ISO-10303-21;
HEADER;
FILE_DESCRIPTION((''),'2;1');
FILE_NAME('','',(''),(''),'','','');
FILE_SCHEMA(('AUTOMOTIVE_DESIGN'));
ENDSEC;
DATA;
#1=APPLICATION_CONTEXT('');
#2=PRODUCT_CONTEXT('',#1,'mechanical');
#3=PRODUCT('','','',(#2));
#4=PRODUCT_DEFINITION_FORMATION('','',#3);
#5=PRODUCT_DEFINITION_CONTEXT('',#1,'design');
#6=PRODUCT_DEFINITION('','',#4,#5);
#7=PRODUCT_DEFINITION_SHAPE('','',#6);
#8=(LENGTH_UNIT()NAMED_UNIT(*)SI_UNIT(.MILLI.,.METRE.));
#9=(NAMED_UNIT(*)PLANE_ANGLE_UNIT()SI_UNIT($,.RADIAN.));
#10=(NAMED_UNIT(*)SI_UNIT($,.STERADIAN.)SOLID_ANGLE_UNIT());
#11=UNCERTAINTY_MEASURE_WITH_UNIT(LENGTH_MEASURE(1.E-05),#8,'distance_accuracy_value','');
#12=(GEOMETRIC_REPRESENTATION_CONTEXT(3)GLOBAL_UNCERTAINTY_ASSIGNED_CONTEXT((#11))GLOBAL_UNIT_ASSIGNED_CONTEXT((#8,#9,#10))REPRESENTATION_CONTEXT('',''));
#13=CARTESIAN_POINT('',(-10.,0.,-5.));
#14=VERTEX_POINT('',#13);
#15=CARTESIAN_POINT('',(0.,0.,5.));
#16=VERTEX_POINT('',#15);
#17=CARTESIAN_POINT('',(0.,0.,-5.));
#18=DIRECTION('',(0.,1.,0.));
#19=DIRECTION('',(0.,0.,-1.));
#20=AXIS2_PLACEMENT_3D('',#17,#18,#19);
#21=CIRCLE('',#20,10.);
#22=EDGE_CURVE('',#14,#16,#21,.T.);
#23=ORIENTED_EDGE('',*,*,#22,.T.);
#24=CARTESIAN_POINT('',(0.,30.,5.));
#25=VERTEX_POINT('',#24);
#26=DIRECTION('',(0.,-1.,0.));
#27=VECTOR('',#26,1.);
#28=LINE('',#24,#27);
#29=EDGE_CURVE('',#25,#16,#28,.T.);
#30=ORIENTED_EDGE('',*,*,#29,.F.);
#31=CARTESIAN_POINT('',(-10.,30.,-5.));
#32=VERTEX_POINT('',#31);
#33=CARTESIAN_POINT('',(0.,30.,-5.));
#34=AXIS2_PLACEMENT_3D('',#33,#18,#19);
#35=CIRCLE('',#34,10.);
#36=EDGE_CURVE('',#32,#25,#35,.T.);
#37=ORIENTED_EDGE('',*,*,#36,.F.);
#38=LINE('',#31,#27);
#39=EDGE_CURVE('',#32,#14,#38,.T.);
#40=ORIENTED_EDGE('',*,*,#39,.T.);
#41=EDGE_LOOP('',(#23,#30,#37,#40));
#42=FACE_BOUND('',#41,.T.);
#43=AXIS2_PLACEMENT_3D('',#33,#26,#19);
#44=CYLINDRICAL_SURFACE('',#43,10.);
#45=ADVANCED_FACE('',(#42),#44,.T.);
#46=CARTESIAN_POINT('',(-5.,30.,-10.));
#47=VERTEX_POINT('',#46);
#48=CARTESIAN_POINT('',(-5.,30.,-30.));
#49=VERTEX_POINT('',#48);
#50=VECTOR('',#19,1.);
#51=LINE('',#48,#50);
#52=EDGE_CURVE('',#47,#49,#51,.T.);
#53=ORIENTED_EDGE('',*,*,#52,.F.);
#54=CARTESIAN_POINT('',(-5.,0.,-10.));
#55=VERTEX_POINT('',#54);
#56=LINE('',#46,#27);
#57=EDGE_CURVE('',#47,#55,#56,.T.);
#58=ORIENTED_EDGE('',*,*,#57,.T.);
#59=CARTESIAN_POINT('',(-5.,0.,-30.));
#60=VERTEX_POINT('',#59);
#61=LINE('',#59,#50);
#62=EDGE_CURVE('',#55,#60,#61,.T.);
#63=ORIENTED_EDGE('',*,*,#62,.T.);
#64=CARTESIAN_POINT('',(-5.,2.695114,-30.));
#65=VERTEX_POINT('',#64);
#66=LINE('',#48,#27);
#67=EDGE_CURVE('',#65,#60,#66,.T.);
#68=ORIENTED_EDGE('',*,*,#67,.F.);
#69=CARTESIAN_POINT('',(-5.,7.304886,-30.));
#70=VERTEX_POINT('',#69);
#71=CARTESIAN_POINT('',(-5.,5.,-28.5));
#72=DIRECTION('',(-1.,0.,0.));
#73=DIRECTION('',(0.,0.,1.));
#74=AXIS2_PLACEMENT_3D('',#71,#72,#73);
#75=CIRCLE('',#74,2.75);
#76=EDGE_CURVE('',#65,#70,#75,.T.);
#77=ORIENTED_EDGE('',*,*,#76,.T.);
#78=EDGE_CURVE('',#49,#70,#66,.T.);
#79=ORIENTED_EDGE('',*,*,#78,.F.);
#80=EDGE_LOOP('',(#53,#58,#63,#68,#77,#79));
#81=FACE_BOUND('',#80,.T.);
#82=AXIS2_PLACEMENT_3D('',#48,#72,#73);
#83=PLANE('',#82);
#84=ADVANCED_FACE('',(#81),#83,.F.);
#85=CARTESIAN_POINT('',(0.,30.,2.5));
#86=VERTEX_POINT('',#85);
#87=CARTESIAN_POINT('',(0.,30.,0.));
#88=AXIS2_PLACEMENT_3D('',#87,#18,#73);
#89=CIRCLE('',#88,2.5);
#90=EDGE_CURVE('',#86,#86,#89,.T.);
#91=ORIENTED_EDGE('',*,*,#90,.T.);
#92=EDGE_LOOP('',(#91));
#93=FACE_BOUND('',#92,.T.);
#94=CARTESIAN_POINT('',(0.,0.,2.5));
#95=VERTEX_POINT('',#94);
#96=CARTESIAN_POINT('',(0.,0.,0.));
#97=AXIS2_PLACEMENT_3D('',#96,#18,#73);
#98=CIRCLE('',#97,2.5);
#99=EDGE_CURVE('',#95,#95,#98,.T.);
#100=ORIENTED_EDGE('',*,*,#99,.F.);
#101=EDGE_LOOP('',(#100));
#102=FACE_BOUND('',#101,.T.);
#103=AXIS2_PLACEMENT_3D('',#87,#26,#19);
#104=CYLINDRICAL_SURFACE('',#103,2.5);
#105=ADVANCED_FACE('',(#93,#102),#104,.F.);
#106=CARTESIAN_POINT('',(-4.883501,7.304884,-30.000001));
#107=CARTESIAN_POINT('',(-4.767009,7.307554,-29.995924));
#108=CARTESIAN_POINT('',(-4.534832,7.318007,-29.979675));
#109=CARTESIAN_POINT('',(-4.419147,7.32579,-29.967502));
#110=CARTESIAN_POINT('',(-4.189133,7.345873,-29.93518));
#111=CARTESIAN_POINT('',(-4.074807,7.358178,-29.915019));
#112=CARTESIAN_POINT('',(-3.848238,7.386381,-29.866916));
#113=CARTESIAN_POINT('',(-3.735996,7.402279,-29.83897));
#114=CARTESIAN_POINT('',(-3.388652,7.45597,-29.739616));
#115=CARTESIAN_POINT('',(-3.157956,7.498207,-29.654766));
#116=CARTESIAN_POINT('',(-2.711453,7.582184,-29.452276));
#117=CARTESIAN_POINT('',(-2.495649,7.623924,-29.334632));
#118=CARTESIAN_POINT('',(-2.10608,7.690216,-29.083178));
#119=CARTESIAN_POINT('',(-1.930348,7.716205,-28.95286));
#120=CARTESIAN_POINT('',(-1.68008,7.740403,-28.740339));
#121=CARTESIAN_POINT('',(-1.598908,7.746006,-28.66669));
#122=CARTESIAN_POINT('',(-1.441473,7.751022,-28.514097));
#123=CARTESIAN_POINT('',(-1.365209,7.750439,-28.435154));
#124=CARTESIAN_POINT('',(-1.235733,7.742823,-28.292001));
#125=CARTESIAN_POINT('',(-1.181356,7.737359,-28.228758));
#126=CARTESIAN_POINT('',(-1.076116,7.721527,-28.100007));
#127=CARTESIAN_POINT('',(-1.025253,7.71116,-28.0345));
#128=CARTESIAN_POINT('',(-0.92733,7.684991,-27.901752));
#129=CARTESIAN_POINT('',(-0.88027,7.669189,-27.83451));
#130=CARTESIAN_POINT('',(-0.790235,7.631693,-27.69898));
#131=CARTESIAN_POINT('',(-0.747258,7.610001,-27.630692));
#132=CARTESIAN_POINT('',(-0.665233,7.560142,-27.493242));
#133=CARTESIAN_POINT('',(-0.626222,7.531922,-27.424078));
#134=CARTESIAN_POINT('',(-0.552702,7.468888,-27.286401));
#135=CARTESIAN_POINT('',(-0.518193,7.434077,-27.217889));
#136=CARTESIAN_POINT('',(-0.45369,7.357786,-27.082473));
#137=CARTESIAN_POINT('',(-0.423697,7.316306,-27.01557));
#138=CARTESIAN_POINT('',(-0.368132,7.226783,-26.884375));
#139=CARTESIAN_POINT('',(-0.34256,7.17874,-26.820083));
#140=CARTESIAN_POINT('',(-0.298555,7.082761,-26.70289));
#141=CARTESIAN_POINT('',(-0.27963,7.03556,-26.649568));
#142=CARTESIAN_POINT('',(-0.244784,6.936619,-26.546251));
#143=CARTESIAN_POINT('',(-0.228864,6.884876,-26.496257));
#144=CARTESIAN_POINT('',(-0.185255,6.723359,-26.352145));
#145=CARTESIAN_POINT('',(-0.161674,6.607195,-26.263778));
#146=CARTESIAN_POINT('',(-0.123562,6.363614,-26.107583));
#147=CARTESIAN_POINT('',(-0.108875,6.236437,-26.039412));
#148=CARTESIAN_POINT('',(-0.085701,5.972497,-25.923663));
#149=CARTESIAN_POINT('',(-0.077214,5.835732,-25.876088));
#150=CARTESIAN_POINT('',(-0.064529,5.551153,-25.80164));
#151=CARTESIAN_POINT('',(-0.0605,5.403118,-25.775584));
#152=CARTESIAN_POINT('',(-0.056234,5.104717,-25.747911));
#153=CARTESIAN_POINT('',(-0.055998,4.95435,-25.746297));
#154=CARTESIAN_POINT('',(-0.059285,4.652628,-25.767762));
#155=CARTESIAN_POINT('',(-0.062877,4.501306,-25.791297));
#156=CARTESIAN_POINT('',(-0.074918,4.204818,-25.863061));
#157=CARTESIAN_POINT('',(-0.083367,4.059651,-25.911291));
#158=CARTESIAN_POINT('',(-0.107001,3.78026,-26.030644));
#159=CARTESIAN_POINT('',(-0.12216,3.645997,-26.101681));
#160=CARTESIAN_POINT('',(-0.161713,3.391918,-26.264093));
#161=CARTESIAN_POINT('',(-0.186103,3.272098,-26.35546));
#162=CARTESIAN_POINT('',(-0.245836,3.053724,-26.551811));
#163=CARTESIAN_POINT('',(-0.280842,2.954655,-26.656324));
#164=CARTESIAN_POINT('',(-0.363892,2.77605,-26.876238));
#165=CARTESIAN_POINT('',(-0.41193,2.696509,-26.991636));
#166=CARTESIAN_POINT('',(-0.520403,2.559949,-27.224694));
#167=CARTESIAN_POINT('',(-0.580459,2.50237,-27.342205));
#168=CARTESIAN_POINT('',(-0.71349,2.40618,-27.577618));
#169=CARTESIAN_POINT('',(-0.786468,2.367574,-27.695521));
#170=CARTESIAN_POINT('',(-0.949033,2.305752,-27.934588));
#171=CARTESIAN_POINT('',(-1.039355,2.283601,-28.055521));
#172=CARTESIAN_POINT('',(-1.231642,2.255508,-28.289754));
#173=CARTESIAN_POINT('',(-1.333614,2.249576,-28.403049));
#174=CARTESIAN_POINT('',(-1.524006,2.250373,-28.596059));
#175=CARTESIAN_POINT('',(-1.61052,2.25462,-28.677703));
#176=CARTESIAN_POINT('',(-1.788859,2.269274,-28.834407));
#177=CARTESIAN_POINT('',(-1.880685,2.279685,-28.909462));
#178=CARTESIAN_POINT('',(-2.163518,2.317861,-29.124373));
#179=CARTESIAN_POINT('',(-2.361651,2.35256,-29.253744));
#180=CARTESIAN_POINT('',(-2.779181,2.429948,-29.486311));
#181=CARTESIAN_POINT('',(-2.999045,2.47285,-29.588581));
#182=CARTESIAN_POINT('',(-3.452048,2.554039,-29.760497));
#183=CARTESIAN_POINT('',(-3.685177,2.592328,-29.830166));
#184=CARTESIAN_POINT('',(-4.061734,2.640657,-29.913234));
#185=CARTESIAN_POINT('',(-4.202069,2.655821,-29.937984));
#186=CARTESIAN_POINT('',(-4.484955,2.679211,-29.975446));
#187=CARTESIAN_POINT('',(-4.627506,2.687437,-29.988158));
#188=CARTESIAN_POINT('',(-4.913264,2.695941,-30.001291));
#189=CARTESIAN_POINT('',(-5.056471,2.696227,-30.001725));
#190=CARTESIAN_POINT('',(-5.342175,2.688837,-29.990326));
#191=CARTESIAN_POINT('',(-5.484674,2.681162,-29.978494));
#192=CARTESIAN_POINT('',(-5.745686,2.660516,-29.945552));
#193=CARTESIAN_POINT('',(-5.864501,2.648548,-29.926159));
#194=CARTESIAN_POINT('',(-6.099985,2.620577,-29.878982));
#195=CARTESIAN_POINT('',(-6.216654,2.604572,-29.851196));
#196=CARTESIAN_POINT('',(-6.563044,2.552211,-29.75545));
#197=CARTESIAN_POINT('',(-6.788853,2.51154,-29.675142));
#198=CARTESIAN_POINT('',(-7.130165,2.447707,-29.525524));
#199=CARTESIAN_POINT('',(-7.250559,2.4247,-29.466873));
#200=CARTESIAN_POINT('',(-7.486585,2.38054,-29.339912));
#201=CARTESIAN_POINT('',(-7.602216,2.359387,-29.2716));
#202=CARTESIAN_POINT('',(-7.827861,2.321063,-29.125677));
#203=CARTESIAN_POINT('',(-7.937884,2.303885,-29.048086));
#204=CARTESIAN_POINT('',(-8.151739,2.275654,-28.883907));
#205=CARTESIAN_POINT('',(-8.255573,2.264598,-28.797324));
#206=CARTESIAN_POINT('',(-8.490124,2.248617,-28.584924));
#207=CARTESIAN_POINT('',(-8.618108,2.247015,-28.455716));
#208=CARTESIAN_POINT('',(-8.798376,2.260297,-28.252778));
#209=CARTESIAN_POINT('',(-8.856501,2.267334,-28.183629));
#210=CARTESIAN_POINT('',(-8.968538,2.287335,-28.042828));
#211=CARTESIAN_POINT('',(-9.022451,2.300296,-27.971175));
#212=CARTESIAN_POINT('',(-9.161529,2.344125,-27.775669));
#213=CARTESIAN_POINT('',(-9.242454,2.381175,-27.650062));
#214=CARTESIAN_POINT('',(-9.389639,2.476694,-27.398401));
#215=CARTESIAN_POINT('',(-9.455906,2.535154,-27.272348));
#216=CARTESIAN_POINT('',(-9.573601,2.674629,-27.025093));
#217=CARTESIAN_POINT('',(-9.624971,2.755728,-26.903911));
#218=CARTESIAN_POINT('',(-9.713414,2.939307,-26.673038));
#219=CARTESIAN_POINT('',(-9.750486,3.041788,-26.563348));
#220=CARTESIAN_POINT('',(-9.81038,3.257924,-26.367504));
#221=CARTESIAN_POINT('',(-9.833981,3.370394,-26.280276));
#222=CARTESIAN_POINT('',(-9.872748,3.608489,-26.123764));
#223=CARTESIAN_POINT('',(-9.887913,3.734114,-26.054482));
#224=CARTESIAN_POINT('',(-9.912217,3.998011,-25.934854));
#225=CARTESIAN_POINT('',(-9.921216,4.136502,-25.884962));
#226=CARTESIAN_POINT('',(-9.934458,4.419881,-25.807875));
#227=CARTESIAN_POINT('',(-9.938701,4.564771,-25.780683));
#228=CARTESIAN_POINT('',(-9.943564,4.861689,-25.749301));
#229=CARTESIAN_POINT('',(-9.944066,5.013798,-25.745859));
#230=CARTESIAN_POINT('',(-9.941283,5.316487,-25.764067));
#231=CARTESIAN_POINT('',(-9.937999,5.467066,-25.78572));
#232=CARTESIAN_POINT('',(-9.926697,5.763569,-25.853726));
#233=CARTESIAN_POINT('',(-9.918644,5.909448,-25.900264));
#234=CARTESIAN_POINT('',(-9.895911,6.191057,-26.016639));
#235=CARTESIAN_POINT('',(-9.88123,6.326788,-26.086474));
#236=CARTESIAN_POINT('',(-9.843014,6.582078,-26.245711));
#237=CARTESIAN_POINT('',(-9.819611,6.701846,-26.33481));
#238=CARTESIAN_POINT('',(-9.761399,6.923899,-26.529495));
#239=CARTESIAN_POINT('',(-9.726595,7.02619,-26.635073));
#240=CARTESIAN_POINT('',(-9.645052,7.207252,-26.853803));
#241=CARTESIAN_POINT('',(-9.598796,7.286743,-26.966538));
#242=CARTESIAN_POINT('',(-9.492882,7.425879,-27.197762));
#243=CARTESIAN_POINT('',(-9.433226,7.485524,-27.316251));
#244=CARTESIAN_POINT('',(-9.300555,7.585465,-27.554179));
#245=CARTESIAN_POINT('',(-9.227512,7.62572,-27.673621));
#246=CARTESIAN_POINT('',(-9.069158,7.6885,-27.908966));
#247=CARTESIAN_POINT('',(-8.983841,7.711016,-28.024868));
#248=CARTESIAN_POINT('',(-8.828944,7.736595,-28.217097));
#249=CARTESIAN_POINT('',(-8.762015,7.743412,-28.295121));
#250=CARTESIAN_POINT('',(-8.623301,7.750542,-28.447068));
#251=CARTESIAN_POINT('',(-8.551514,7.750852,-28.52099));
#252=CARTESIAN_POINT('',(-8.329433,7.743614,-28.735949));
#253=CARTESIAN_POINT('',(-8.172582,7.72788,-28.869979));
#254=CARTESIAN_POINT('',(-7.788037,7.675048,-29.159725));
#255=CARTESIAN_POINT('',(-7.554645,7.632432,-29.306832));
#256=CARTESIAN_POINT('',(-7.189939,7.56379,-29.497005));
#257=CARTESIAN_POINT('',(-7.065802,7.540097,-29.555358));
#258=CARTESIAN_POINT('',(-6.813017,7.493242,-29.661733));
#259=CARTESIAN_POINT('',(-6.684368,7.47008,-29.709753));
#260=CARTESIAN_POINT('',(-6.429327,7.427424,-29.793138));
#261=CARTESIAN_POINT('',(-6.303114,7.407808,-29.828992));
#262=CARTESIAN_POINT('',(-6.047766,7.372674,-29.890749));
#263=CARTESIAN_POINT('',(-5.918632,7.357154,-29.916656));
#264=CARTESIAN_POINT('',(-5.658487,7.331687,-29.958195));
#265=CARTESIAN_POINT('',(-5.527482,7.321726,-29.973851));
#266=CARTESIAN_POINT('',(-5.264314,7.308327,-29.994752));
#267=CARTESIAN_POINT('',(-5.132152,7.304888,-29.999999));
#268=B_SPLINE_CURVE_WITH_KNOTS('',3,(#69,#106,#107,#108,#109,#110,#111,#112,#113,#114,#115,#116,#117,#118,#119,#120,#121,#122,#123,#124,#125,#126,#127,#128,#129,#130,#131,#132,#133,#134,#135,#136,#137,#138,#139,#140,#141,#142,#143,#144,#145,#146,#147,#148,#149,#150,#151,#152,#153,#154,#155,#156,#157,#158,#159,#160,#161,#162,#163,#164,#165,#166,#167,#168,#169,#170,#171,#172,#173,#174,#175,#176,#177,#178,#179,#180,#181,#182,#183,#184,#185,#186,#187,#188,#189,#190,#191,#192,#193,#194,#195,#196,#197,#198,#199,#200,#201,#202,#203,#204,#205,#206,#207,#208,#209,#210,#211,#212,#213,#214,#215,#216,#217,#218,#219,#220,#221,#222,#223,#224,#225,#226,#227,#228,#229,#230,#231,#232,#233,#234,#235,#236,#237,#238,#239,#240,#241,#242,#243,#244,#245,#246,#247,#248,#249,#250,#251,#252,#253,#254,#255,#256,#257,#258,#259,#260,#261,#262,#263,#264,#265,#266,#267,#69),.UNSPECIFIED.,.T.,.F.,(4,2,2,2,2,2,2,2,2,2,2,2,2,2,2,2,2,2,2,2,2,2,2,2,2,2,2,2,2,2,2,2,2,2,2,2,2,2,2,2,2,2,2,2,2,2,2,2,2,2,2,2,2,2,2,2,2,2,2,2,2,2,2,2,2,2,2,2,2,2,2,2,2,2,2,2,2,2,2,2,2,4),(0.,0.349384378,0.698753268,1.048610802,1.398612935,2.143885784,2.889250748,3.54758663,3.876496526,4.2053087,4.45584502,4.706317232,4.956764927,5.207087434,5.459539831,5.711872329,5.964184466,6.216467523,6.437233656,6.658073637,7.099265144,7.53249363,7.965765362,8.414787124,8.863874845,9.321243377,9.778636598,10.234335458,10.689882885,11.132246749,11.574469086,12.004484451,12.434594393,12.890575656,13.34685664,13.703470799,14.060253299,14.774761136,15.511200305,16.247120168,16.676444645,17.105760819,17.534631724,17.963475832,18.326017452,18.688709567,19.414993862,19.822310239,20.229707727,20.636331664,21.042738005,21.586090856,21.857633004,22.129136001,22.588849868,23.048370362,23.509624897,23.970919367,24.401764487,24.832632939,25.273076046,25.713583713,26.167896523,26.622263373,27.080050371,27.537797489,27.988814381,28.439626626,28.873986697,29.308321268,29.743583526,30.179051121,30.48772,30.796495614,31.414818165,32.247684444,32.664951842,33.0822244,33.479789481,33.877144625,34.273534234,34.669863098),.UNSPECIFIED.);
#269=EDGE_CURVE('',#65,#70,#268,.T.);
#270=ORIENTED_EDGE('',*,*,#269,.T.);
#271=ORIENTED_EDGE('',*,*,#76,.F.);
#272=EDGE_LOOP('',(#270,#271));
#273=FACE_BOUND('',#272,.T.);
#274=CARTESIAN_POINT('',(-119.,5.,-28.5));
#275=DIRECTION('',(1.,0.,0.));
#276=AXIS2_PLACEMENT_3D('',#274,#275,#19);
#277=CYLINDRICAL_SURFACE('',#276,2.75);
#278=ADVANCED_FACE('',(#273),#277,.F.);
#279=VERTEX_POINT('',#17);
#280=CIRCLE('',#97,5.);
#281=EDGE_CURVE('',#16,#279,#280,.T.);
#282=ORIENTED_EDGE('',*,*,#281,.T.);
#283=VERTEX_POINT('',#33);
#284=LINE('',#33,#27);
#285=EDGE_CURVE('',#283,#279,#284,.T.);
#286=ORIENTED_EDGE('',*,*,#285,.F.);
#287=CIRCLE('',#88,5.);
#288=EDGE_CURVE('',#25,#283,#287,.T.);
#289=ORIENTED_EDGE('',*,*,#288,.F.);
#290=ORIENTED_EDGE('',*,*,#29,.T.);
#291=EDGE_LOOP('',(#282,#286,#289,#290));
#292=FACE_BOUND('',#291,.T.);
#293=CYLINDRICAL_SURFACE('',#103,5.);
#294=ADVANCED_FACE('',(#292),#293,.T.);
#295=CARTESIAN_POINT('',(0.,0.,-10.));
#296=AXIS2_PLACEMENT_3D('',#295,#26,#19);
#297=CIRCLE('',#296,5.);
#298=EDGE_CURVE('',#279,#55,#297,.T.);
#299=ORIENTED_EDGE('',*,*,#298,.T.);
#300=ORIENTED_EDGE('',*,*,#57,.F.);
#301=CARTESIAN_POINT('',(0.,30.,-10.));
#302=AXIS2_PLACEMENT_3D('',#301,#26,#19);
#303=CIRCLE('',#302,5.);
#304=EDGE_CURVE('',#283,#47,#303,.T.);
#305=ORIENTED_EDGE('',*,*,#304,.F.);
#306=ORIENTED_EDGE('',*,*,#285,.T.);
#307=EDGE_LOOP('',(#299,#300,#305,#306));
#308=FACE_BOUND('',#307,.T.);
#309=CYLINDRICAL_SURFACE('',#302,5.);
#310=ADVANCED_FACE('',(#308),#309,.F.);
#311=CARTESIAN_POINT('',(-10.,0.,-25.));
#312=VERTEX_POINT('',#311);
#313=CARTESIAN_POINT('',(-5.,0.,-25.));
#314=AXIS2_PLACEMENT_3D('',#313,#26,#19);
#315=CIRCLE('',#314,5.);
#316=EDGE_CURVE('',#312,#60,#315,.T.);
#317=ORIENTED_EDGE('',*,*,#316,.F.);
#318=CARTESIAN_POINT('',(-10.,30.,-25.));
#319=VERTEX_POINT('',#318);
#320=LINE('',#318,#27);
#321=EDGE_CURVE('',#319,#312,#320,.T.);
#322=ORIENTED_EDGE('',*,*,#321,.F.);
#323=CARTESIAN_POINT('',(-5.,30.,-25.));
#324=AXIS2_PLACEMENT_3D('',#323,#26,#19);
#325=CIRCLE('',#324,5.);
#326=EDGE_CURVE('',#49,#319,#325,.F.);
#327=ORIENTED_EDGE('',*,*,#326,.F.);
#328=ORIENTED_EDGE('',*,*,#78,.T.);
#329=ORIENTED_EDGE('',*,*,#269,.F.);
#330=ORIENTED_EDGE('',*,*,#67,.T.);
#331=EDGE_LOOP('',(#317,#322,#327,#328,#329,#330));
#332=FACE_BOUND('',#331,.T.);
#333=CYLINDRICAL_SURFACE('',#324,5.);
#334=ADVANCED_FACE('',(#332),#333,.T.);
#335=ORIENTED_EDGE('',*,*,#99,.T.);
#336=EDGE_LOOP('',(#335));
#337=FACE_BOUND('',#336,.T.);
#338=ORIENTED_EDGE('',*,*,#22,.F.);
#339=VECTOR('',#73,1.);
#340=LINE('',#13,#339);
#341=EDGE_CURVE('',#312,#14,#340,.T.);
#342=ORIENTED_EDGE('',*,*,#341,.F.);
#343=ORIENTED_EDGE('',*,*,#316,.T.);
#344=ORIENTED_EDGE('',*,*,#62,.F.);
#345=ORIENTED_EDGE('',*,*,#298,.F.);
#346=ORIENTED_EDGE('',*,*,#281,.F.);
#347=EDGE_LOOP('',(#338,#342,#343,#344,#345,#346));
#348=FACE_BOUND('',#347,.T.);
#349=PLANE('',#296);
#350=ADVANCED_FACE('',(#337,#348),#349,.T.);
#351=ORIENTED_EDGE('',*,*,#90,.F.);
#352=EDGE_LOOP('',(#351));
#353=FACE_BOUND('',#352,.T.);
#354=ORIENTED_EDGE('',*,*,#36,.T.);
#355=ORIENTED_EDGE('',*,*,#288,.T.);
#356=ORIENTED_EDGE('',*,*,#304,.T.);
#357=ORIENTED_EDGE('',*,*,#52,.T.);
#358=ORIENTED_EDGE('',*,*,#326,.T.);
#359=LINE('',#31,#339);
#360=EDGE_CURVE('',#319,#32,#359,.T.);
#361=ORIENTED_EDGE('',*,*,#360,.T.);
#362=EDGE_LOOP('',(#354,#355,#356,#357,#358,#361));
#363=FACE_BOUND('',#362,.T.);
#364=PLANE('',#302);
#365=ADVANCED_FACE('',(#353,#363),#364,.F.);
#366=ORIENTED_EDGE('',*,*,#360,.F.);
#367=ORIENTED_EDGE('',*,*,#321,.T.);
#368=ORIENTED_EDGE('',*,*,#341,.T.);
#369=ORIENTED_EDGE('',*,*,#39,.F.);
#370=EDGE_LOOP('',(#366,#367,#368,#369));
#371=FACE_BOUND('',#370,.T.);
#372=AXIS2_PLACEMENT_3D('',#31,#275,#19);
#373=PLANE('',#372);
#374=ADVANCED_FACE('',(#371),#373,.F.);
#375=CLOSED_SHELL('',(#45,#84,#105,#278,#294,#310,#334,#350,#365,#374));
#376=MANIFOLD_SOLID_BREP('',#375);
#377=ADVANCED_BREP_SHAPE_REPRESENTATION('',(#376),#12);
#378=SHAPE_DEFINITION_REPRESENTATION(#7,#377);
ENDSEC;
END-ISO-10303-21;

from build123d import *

# Parameters (mm, degrees)
SKETCH1_R           = 2.5
BOSS_EXTRUDE1_DEPTH = 30
FILLET1_R           = 5
SKETCH2_R           = 2.75
CUT_EXTRUDE1_DEPTH  = 124


with BuildPart() as part:
    # Sketch1 → Boss-Extrude1 (new body)
    with BuildSketch(Plane(origin=(0, 0, 0), x_dir=(1, 0, 0), z_dir=(0, 1, 0))):
        with BuildLine():
            Line((-5, 30), (-5, 10))
            ThreePointArc((-5, 10), (-3.535533906, 6.464466094), (0, 5))
            ThreePointArc((0, 5), (5, 0), (0, -5))
            ThreePointArc((0, -5), (-7.071067812, -2.071067812), (-10, 5))
            Line((-10, 5), (-10, 30))
            Line((-10, 30), (-5, 30))
        make_face()
        with Locations(Location((0, 0, 0), (0, 0, 270))):
            Circle(SKETCH1_R, mode=Mode.SUBTRACT)
    extrude(amount=BOSS_EXTRUDE1_DEPTH)

    # Fillet1
    fillet1_edges = [part.edges().sort_by_distance(p)[0] for p in [
        (-10, 15, -30),
    ]]
    fillet(fillet1_edges, radius=FILLET1_R - 0.0001)  # a hair under: the kernel refuses the full size

    # Sketch2 → Cut-Extrude1 (cut)
    with BuildSketch(Plane(origin=(5, -405, -405), x_dir=(0, 0, -1), z_dir=(1, 0, 0))):
        with Locations((-376.5, 410)):
            Circle(SKETCH2_R)
    extrude(amount=-CUT_EXTRUDE1_DEPTH, mode=Mode.SUBTRACT)


solid = part.part
